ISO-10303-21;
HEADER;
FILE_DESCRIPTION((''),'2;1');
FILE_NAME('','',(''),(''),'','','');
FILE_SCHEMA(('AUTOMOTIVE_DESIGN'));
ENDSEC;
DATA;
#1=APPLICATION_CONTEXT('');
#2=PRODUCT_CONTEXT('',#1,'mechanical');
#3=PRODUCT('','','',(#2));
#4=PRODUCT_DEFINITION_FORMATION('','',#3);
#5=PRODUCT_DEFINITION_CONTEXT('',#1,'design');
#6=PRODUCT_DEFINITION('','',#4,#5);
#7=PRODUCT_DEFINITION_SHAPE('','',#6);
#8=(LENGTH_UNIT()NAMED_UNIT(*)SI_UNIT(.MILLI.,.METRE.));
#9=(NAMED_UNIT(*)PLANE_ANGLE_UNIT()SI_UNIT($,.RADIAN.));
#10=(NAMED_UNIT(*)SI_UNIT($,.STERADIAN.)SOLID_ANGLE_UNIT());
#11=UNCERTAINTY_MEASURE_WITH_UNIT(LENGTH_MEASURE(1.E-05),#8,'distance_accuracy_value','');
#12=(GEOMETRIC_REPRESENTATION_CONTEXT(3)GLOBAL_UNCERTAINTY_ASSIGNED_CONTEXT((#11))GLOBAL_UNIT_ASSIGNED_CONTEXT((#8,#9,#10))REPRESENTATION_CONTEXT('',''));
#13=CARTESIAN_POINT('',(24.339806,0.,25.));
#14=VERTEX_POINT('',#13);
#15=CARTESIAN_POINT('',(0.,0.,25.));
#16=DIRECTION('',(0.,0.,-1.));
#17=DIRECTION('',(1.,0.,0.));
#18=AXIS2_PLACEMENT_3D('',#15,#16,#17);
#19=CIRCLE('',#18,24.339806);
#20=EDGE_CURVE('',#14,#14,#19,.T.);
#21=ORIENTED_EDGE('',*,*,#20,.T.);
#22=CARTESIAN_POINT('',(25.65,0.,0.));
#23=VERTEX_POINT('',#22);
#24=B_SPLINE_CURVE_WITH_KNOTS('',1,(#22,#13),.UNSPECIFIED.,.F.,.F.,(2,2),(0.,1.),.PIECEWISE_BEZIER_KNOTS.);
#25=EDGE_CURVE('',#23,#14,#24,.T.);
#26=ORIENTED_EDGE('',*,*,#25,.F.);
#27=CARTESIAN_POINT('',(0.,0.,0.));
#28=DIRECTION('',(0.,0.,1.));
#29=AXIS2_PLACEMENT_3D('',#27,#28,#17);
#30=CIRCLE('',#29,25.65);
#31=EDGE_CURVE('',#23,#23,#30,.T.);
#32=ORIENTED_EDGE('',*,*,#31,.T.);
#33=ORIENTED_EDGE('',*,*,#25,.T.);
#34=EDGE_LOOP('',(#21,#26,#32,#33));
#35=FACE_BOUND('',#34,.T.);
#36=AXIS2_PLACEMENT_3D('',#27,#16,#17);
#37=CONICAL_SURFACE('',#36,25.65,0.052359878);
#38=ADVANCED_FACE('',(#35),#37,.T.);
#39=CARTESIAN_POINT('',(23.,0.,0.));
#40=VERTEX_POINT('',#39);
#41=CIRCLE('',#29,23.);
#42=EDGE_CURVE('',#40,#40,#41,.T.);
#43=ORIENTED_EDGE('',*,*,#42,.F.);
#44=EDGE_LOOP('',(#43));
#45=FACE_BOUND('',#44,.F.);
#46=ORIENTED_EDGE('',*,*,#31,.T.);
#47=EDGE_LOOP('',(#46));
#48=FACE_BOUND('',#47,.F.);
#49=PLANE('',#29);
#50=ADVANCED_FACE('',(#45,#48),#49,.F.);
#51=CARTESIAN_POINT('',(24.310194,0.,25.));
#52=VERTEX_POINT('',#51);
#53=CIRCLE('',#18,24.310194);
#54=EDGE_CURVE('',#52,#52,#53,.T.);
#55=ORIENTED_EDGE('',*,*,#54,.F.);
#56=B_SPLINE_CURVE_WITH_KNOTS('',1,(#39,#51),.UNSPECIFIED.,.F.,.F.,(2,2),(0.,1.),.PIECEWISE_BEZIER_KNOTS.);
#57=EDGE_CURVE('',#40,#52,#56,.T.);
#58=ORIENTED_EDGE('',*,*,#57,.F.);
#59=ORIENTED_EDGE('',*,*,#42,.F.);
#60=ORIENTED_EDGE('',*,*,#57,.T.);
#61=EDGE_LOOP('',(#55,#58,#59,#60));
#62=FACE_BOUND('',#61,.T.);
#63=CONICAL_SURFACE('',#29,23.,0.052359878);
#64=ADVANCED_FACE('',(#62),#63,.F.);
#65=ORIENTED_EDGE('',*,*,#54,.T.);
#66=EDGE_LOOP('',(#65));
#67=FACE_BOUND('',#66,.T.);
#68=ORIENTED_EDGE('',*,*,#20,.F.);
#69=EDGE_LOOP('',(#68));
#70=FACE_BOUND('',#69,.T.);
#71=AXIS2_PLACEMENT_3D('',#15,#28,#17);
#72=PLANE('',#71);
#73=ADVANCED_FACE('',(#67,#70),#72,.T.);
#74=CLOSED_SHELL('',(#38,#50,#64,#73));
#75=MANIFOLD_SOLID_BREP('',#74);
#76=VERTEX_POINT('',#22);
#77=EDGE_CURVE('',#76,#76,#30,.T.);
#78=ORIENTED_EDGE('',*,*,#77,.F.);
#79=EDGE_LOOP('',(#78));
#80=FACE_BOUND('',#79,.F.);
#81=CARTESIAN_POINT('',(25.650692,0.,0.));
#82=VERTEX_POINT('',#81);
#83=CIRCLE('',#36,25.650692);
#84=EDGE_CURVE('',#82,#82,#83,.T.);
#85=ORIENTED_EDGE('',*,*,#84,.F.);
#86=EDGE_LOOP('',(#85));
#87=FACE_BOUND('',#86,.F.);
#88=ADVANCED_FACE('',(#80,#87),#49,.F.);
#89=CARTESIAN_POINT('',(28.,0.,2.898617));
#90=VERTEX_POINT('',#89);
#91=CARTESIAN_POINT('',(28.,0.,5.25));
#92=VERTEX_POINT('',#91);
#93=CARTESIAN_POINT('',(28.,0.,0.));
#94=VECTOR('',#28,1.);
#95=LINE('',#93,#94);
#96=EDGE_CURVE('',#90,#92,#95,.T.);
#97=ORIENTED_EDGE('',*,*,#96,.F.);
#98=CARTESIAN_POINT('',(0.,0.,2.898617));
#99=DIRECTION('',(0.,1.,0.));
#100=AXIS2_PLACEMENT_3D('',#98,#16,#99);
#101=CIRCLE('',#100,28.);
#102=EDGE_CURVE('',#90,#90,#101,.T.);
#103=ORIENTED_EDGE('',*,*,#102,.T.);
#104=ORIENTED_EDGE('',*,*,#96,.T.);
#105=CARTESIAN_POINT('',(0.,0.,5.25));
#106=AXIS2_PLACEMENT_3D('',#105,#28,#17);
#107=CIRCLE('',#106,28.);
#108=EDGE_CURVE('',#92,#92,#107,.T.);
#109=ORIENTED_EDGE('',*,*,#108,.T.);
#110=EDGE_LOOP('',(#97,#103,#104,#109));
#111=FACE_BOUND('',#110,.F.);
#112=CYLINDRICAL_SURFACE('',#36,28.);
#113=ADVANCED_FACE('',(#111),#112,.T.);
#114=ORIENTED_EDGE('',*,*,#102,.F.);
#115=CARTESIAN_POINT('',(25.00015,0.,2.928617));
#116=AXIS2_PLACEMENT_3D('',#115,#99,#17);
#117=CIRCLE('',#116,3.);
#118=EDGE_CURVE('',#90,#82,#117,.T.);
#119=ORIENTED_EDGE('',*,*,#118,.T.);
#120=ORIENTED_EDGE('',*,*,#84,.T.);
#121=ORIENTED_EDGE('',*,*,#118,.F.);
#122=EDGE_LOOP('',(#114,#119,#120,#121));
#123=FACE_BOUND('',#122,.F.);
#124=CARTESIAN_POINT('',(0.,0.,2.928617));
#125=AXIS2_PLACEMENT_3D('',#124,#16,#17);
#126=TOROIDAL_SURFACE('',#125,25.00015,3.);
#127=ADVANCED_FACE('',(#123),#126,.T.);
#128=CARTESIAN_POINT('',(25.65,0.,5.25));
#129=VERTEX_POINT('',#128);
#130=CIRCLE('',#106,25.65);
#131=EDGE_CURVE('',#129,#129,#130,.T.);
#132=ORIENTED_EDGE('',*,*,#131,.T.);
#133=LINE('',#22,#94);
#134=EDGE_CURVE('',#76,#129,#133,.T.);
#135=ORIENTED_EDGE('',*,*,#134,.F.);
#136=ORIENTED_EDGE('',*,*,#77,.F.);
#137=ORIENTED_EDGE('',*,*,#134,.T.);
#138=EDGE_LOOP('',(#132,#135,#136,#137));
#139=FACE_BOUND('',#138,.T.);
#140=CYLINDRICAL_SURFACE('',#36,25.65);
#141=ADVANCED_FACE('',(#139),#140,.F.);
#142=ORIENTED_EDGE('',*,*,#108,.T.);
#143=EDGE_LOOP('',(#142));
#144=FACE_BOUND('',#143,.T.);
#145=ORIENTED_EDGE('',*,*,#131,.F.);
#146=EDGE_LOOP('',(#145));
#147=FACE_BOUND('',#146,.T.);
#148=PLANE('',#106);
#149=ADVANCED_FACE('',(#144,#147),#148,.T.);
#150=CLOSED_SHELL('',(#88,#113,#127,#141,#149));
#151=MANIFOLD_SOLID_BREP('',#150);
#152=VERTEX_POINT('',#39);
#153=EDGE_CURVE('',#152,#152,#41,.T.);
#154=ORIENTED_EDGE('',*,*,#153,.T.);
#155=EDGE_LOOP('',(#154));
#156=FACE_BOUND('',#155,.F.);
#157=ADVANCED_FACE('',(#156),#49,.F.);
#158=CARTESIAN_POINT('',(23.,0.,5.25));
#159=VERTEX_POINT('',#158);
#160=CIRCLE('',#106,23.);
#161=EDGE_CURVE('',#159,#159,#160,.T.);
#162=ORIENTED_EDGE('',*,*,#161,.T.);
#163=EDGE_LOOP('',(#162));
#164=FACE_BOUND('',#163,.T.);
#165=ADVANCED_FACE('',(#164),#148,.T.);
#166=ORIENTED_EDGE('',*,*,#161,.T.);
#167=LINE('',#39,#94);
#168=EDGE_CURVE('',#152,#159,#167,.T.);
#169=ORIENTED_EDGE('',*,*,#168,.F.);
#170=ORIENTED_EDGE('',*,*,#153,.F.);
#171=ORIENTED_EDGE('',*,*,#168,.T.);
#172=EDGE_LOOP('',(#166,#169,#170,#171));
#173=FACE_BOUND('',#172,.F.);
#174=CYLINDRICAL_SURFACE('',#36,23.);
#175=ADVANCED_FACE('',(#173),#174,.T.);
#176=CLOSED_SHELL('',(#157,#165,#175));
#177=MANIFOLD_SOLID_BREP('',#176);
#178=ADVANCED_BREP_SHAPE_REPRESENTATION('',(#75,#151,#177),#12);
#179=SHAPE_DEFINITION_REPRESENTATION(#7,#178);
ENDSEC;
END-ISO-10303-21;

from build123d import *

# Parameters (mm, degrees)
F0_R     = 25.65
F0_R_2   = 23
F1_DEPTH = 25
F1_TAPER = 3
F2_DEPTH = 5.25
F0_R_3   = 28.0000000894
F3_DEPTH = 5.25


# Not quite as in the source:
# - a fillet or chamfer that OpenCascade refuses, or shapes differently, is made with other operations: its cross-section is extruded or revolved along the edge and cut away or added


with BuildPart() as f1:
    # F0 (on Top) → F1 (new body)
    with BuildSketch(Plane.XY):
        Circle(F0_R)
        Circle(F0_R_2, mode=Mode.SUBTRACT)
    extrude(amount=F1_DEPTH, taper=F1_TAPER)


with BuildPart() as f2:
    # F0 (on Top) → F2 (new body)
    with BuildSketch(Plane.XY):
        Circle(F0_R_2)
    extrude(amount=F2_DEPTH)


with BuildPart() as f3:
    # F0 (on Top) → F3 (new body)
    with BuildSketch(Plane.XY):
        Circle(F0_R_3)
        Circle(F0_R, mode=Mode.SUBTRACT)
    extrude(amount=F3_DEPTH)

    # F4: fillet of radius 3 on 1 edges, made by hand

    # F4_s1 → F4_t2 (revolve, cut)
    with BuildSketch(Plane.XZ):
        with BuildLine():
            ThreePointArc((28.0001500894, 2.9286165874), (27.3399841876, 1.0510712769), (25.6500324941, -0.0001464382))
            Line((25.6500324941, -0.0001464382), (25.6630301422, -0.0587216987))
            ThreePointArc((25.6630301422, -0.0587216987), (26.8250162918, -0.06), (28.0000000894, -0.06))
            Line((28.0000000894, -0.06), (28.0600000894, 0))
            ThreePointArc((28.0600000894, 0), (28.0600000894, 1.4643082937), (28.0601500894, 2.9286165874))
            Line((28.0601500894, 2.9286165874), (28.0001500894, 2.9286165874))
        make_face()
    revolve(axis=Axis((0, 0, 0), (0, 0, 1)), mode=Mode.SUBTRACT)


solid = Compound([f1.part, f2.part, f3.part])
